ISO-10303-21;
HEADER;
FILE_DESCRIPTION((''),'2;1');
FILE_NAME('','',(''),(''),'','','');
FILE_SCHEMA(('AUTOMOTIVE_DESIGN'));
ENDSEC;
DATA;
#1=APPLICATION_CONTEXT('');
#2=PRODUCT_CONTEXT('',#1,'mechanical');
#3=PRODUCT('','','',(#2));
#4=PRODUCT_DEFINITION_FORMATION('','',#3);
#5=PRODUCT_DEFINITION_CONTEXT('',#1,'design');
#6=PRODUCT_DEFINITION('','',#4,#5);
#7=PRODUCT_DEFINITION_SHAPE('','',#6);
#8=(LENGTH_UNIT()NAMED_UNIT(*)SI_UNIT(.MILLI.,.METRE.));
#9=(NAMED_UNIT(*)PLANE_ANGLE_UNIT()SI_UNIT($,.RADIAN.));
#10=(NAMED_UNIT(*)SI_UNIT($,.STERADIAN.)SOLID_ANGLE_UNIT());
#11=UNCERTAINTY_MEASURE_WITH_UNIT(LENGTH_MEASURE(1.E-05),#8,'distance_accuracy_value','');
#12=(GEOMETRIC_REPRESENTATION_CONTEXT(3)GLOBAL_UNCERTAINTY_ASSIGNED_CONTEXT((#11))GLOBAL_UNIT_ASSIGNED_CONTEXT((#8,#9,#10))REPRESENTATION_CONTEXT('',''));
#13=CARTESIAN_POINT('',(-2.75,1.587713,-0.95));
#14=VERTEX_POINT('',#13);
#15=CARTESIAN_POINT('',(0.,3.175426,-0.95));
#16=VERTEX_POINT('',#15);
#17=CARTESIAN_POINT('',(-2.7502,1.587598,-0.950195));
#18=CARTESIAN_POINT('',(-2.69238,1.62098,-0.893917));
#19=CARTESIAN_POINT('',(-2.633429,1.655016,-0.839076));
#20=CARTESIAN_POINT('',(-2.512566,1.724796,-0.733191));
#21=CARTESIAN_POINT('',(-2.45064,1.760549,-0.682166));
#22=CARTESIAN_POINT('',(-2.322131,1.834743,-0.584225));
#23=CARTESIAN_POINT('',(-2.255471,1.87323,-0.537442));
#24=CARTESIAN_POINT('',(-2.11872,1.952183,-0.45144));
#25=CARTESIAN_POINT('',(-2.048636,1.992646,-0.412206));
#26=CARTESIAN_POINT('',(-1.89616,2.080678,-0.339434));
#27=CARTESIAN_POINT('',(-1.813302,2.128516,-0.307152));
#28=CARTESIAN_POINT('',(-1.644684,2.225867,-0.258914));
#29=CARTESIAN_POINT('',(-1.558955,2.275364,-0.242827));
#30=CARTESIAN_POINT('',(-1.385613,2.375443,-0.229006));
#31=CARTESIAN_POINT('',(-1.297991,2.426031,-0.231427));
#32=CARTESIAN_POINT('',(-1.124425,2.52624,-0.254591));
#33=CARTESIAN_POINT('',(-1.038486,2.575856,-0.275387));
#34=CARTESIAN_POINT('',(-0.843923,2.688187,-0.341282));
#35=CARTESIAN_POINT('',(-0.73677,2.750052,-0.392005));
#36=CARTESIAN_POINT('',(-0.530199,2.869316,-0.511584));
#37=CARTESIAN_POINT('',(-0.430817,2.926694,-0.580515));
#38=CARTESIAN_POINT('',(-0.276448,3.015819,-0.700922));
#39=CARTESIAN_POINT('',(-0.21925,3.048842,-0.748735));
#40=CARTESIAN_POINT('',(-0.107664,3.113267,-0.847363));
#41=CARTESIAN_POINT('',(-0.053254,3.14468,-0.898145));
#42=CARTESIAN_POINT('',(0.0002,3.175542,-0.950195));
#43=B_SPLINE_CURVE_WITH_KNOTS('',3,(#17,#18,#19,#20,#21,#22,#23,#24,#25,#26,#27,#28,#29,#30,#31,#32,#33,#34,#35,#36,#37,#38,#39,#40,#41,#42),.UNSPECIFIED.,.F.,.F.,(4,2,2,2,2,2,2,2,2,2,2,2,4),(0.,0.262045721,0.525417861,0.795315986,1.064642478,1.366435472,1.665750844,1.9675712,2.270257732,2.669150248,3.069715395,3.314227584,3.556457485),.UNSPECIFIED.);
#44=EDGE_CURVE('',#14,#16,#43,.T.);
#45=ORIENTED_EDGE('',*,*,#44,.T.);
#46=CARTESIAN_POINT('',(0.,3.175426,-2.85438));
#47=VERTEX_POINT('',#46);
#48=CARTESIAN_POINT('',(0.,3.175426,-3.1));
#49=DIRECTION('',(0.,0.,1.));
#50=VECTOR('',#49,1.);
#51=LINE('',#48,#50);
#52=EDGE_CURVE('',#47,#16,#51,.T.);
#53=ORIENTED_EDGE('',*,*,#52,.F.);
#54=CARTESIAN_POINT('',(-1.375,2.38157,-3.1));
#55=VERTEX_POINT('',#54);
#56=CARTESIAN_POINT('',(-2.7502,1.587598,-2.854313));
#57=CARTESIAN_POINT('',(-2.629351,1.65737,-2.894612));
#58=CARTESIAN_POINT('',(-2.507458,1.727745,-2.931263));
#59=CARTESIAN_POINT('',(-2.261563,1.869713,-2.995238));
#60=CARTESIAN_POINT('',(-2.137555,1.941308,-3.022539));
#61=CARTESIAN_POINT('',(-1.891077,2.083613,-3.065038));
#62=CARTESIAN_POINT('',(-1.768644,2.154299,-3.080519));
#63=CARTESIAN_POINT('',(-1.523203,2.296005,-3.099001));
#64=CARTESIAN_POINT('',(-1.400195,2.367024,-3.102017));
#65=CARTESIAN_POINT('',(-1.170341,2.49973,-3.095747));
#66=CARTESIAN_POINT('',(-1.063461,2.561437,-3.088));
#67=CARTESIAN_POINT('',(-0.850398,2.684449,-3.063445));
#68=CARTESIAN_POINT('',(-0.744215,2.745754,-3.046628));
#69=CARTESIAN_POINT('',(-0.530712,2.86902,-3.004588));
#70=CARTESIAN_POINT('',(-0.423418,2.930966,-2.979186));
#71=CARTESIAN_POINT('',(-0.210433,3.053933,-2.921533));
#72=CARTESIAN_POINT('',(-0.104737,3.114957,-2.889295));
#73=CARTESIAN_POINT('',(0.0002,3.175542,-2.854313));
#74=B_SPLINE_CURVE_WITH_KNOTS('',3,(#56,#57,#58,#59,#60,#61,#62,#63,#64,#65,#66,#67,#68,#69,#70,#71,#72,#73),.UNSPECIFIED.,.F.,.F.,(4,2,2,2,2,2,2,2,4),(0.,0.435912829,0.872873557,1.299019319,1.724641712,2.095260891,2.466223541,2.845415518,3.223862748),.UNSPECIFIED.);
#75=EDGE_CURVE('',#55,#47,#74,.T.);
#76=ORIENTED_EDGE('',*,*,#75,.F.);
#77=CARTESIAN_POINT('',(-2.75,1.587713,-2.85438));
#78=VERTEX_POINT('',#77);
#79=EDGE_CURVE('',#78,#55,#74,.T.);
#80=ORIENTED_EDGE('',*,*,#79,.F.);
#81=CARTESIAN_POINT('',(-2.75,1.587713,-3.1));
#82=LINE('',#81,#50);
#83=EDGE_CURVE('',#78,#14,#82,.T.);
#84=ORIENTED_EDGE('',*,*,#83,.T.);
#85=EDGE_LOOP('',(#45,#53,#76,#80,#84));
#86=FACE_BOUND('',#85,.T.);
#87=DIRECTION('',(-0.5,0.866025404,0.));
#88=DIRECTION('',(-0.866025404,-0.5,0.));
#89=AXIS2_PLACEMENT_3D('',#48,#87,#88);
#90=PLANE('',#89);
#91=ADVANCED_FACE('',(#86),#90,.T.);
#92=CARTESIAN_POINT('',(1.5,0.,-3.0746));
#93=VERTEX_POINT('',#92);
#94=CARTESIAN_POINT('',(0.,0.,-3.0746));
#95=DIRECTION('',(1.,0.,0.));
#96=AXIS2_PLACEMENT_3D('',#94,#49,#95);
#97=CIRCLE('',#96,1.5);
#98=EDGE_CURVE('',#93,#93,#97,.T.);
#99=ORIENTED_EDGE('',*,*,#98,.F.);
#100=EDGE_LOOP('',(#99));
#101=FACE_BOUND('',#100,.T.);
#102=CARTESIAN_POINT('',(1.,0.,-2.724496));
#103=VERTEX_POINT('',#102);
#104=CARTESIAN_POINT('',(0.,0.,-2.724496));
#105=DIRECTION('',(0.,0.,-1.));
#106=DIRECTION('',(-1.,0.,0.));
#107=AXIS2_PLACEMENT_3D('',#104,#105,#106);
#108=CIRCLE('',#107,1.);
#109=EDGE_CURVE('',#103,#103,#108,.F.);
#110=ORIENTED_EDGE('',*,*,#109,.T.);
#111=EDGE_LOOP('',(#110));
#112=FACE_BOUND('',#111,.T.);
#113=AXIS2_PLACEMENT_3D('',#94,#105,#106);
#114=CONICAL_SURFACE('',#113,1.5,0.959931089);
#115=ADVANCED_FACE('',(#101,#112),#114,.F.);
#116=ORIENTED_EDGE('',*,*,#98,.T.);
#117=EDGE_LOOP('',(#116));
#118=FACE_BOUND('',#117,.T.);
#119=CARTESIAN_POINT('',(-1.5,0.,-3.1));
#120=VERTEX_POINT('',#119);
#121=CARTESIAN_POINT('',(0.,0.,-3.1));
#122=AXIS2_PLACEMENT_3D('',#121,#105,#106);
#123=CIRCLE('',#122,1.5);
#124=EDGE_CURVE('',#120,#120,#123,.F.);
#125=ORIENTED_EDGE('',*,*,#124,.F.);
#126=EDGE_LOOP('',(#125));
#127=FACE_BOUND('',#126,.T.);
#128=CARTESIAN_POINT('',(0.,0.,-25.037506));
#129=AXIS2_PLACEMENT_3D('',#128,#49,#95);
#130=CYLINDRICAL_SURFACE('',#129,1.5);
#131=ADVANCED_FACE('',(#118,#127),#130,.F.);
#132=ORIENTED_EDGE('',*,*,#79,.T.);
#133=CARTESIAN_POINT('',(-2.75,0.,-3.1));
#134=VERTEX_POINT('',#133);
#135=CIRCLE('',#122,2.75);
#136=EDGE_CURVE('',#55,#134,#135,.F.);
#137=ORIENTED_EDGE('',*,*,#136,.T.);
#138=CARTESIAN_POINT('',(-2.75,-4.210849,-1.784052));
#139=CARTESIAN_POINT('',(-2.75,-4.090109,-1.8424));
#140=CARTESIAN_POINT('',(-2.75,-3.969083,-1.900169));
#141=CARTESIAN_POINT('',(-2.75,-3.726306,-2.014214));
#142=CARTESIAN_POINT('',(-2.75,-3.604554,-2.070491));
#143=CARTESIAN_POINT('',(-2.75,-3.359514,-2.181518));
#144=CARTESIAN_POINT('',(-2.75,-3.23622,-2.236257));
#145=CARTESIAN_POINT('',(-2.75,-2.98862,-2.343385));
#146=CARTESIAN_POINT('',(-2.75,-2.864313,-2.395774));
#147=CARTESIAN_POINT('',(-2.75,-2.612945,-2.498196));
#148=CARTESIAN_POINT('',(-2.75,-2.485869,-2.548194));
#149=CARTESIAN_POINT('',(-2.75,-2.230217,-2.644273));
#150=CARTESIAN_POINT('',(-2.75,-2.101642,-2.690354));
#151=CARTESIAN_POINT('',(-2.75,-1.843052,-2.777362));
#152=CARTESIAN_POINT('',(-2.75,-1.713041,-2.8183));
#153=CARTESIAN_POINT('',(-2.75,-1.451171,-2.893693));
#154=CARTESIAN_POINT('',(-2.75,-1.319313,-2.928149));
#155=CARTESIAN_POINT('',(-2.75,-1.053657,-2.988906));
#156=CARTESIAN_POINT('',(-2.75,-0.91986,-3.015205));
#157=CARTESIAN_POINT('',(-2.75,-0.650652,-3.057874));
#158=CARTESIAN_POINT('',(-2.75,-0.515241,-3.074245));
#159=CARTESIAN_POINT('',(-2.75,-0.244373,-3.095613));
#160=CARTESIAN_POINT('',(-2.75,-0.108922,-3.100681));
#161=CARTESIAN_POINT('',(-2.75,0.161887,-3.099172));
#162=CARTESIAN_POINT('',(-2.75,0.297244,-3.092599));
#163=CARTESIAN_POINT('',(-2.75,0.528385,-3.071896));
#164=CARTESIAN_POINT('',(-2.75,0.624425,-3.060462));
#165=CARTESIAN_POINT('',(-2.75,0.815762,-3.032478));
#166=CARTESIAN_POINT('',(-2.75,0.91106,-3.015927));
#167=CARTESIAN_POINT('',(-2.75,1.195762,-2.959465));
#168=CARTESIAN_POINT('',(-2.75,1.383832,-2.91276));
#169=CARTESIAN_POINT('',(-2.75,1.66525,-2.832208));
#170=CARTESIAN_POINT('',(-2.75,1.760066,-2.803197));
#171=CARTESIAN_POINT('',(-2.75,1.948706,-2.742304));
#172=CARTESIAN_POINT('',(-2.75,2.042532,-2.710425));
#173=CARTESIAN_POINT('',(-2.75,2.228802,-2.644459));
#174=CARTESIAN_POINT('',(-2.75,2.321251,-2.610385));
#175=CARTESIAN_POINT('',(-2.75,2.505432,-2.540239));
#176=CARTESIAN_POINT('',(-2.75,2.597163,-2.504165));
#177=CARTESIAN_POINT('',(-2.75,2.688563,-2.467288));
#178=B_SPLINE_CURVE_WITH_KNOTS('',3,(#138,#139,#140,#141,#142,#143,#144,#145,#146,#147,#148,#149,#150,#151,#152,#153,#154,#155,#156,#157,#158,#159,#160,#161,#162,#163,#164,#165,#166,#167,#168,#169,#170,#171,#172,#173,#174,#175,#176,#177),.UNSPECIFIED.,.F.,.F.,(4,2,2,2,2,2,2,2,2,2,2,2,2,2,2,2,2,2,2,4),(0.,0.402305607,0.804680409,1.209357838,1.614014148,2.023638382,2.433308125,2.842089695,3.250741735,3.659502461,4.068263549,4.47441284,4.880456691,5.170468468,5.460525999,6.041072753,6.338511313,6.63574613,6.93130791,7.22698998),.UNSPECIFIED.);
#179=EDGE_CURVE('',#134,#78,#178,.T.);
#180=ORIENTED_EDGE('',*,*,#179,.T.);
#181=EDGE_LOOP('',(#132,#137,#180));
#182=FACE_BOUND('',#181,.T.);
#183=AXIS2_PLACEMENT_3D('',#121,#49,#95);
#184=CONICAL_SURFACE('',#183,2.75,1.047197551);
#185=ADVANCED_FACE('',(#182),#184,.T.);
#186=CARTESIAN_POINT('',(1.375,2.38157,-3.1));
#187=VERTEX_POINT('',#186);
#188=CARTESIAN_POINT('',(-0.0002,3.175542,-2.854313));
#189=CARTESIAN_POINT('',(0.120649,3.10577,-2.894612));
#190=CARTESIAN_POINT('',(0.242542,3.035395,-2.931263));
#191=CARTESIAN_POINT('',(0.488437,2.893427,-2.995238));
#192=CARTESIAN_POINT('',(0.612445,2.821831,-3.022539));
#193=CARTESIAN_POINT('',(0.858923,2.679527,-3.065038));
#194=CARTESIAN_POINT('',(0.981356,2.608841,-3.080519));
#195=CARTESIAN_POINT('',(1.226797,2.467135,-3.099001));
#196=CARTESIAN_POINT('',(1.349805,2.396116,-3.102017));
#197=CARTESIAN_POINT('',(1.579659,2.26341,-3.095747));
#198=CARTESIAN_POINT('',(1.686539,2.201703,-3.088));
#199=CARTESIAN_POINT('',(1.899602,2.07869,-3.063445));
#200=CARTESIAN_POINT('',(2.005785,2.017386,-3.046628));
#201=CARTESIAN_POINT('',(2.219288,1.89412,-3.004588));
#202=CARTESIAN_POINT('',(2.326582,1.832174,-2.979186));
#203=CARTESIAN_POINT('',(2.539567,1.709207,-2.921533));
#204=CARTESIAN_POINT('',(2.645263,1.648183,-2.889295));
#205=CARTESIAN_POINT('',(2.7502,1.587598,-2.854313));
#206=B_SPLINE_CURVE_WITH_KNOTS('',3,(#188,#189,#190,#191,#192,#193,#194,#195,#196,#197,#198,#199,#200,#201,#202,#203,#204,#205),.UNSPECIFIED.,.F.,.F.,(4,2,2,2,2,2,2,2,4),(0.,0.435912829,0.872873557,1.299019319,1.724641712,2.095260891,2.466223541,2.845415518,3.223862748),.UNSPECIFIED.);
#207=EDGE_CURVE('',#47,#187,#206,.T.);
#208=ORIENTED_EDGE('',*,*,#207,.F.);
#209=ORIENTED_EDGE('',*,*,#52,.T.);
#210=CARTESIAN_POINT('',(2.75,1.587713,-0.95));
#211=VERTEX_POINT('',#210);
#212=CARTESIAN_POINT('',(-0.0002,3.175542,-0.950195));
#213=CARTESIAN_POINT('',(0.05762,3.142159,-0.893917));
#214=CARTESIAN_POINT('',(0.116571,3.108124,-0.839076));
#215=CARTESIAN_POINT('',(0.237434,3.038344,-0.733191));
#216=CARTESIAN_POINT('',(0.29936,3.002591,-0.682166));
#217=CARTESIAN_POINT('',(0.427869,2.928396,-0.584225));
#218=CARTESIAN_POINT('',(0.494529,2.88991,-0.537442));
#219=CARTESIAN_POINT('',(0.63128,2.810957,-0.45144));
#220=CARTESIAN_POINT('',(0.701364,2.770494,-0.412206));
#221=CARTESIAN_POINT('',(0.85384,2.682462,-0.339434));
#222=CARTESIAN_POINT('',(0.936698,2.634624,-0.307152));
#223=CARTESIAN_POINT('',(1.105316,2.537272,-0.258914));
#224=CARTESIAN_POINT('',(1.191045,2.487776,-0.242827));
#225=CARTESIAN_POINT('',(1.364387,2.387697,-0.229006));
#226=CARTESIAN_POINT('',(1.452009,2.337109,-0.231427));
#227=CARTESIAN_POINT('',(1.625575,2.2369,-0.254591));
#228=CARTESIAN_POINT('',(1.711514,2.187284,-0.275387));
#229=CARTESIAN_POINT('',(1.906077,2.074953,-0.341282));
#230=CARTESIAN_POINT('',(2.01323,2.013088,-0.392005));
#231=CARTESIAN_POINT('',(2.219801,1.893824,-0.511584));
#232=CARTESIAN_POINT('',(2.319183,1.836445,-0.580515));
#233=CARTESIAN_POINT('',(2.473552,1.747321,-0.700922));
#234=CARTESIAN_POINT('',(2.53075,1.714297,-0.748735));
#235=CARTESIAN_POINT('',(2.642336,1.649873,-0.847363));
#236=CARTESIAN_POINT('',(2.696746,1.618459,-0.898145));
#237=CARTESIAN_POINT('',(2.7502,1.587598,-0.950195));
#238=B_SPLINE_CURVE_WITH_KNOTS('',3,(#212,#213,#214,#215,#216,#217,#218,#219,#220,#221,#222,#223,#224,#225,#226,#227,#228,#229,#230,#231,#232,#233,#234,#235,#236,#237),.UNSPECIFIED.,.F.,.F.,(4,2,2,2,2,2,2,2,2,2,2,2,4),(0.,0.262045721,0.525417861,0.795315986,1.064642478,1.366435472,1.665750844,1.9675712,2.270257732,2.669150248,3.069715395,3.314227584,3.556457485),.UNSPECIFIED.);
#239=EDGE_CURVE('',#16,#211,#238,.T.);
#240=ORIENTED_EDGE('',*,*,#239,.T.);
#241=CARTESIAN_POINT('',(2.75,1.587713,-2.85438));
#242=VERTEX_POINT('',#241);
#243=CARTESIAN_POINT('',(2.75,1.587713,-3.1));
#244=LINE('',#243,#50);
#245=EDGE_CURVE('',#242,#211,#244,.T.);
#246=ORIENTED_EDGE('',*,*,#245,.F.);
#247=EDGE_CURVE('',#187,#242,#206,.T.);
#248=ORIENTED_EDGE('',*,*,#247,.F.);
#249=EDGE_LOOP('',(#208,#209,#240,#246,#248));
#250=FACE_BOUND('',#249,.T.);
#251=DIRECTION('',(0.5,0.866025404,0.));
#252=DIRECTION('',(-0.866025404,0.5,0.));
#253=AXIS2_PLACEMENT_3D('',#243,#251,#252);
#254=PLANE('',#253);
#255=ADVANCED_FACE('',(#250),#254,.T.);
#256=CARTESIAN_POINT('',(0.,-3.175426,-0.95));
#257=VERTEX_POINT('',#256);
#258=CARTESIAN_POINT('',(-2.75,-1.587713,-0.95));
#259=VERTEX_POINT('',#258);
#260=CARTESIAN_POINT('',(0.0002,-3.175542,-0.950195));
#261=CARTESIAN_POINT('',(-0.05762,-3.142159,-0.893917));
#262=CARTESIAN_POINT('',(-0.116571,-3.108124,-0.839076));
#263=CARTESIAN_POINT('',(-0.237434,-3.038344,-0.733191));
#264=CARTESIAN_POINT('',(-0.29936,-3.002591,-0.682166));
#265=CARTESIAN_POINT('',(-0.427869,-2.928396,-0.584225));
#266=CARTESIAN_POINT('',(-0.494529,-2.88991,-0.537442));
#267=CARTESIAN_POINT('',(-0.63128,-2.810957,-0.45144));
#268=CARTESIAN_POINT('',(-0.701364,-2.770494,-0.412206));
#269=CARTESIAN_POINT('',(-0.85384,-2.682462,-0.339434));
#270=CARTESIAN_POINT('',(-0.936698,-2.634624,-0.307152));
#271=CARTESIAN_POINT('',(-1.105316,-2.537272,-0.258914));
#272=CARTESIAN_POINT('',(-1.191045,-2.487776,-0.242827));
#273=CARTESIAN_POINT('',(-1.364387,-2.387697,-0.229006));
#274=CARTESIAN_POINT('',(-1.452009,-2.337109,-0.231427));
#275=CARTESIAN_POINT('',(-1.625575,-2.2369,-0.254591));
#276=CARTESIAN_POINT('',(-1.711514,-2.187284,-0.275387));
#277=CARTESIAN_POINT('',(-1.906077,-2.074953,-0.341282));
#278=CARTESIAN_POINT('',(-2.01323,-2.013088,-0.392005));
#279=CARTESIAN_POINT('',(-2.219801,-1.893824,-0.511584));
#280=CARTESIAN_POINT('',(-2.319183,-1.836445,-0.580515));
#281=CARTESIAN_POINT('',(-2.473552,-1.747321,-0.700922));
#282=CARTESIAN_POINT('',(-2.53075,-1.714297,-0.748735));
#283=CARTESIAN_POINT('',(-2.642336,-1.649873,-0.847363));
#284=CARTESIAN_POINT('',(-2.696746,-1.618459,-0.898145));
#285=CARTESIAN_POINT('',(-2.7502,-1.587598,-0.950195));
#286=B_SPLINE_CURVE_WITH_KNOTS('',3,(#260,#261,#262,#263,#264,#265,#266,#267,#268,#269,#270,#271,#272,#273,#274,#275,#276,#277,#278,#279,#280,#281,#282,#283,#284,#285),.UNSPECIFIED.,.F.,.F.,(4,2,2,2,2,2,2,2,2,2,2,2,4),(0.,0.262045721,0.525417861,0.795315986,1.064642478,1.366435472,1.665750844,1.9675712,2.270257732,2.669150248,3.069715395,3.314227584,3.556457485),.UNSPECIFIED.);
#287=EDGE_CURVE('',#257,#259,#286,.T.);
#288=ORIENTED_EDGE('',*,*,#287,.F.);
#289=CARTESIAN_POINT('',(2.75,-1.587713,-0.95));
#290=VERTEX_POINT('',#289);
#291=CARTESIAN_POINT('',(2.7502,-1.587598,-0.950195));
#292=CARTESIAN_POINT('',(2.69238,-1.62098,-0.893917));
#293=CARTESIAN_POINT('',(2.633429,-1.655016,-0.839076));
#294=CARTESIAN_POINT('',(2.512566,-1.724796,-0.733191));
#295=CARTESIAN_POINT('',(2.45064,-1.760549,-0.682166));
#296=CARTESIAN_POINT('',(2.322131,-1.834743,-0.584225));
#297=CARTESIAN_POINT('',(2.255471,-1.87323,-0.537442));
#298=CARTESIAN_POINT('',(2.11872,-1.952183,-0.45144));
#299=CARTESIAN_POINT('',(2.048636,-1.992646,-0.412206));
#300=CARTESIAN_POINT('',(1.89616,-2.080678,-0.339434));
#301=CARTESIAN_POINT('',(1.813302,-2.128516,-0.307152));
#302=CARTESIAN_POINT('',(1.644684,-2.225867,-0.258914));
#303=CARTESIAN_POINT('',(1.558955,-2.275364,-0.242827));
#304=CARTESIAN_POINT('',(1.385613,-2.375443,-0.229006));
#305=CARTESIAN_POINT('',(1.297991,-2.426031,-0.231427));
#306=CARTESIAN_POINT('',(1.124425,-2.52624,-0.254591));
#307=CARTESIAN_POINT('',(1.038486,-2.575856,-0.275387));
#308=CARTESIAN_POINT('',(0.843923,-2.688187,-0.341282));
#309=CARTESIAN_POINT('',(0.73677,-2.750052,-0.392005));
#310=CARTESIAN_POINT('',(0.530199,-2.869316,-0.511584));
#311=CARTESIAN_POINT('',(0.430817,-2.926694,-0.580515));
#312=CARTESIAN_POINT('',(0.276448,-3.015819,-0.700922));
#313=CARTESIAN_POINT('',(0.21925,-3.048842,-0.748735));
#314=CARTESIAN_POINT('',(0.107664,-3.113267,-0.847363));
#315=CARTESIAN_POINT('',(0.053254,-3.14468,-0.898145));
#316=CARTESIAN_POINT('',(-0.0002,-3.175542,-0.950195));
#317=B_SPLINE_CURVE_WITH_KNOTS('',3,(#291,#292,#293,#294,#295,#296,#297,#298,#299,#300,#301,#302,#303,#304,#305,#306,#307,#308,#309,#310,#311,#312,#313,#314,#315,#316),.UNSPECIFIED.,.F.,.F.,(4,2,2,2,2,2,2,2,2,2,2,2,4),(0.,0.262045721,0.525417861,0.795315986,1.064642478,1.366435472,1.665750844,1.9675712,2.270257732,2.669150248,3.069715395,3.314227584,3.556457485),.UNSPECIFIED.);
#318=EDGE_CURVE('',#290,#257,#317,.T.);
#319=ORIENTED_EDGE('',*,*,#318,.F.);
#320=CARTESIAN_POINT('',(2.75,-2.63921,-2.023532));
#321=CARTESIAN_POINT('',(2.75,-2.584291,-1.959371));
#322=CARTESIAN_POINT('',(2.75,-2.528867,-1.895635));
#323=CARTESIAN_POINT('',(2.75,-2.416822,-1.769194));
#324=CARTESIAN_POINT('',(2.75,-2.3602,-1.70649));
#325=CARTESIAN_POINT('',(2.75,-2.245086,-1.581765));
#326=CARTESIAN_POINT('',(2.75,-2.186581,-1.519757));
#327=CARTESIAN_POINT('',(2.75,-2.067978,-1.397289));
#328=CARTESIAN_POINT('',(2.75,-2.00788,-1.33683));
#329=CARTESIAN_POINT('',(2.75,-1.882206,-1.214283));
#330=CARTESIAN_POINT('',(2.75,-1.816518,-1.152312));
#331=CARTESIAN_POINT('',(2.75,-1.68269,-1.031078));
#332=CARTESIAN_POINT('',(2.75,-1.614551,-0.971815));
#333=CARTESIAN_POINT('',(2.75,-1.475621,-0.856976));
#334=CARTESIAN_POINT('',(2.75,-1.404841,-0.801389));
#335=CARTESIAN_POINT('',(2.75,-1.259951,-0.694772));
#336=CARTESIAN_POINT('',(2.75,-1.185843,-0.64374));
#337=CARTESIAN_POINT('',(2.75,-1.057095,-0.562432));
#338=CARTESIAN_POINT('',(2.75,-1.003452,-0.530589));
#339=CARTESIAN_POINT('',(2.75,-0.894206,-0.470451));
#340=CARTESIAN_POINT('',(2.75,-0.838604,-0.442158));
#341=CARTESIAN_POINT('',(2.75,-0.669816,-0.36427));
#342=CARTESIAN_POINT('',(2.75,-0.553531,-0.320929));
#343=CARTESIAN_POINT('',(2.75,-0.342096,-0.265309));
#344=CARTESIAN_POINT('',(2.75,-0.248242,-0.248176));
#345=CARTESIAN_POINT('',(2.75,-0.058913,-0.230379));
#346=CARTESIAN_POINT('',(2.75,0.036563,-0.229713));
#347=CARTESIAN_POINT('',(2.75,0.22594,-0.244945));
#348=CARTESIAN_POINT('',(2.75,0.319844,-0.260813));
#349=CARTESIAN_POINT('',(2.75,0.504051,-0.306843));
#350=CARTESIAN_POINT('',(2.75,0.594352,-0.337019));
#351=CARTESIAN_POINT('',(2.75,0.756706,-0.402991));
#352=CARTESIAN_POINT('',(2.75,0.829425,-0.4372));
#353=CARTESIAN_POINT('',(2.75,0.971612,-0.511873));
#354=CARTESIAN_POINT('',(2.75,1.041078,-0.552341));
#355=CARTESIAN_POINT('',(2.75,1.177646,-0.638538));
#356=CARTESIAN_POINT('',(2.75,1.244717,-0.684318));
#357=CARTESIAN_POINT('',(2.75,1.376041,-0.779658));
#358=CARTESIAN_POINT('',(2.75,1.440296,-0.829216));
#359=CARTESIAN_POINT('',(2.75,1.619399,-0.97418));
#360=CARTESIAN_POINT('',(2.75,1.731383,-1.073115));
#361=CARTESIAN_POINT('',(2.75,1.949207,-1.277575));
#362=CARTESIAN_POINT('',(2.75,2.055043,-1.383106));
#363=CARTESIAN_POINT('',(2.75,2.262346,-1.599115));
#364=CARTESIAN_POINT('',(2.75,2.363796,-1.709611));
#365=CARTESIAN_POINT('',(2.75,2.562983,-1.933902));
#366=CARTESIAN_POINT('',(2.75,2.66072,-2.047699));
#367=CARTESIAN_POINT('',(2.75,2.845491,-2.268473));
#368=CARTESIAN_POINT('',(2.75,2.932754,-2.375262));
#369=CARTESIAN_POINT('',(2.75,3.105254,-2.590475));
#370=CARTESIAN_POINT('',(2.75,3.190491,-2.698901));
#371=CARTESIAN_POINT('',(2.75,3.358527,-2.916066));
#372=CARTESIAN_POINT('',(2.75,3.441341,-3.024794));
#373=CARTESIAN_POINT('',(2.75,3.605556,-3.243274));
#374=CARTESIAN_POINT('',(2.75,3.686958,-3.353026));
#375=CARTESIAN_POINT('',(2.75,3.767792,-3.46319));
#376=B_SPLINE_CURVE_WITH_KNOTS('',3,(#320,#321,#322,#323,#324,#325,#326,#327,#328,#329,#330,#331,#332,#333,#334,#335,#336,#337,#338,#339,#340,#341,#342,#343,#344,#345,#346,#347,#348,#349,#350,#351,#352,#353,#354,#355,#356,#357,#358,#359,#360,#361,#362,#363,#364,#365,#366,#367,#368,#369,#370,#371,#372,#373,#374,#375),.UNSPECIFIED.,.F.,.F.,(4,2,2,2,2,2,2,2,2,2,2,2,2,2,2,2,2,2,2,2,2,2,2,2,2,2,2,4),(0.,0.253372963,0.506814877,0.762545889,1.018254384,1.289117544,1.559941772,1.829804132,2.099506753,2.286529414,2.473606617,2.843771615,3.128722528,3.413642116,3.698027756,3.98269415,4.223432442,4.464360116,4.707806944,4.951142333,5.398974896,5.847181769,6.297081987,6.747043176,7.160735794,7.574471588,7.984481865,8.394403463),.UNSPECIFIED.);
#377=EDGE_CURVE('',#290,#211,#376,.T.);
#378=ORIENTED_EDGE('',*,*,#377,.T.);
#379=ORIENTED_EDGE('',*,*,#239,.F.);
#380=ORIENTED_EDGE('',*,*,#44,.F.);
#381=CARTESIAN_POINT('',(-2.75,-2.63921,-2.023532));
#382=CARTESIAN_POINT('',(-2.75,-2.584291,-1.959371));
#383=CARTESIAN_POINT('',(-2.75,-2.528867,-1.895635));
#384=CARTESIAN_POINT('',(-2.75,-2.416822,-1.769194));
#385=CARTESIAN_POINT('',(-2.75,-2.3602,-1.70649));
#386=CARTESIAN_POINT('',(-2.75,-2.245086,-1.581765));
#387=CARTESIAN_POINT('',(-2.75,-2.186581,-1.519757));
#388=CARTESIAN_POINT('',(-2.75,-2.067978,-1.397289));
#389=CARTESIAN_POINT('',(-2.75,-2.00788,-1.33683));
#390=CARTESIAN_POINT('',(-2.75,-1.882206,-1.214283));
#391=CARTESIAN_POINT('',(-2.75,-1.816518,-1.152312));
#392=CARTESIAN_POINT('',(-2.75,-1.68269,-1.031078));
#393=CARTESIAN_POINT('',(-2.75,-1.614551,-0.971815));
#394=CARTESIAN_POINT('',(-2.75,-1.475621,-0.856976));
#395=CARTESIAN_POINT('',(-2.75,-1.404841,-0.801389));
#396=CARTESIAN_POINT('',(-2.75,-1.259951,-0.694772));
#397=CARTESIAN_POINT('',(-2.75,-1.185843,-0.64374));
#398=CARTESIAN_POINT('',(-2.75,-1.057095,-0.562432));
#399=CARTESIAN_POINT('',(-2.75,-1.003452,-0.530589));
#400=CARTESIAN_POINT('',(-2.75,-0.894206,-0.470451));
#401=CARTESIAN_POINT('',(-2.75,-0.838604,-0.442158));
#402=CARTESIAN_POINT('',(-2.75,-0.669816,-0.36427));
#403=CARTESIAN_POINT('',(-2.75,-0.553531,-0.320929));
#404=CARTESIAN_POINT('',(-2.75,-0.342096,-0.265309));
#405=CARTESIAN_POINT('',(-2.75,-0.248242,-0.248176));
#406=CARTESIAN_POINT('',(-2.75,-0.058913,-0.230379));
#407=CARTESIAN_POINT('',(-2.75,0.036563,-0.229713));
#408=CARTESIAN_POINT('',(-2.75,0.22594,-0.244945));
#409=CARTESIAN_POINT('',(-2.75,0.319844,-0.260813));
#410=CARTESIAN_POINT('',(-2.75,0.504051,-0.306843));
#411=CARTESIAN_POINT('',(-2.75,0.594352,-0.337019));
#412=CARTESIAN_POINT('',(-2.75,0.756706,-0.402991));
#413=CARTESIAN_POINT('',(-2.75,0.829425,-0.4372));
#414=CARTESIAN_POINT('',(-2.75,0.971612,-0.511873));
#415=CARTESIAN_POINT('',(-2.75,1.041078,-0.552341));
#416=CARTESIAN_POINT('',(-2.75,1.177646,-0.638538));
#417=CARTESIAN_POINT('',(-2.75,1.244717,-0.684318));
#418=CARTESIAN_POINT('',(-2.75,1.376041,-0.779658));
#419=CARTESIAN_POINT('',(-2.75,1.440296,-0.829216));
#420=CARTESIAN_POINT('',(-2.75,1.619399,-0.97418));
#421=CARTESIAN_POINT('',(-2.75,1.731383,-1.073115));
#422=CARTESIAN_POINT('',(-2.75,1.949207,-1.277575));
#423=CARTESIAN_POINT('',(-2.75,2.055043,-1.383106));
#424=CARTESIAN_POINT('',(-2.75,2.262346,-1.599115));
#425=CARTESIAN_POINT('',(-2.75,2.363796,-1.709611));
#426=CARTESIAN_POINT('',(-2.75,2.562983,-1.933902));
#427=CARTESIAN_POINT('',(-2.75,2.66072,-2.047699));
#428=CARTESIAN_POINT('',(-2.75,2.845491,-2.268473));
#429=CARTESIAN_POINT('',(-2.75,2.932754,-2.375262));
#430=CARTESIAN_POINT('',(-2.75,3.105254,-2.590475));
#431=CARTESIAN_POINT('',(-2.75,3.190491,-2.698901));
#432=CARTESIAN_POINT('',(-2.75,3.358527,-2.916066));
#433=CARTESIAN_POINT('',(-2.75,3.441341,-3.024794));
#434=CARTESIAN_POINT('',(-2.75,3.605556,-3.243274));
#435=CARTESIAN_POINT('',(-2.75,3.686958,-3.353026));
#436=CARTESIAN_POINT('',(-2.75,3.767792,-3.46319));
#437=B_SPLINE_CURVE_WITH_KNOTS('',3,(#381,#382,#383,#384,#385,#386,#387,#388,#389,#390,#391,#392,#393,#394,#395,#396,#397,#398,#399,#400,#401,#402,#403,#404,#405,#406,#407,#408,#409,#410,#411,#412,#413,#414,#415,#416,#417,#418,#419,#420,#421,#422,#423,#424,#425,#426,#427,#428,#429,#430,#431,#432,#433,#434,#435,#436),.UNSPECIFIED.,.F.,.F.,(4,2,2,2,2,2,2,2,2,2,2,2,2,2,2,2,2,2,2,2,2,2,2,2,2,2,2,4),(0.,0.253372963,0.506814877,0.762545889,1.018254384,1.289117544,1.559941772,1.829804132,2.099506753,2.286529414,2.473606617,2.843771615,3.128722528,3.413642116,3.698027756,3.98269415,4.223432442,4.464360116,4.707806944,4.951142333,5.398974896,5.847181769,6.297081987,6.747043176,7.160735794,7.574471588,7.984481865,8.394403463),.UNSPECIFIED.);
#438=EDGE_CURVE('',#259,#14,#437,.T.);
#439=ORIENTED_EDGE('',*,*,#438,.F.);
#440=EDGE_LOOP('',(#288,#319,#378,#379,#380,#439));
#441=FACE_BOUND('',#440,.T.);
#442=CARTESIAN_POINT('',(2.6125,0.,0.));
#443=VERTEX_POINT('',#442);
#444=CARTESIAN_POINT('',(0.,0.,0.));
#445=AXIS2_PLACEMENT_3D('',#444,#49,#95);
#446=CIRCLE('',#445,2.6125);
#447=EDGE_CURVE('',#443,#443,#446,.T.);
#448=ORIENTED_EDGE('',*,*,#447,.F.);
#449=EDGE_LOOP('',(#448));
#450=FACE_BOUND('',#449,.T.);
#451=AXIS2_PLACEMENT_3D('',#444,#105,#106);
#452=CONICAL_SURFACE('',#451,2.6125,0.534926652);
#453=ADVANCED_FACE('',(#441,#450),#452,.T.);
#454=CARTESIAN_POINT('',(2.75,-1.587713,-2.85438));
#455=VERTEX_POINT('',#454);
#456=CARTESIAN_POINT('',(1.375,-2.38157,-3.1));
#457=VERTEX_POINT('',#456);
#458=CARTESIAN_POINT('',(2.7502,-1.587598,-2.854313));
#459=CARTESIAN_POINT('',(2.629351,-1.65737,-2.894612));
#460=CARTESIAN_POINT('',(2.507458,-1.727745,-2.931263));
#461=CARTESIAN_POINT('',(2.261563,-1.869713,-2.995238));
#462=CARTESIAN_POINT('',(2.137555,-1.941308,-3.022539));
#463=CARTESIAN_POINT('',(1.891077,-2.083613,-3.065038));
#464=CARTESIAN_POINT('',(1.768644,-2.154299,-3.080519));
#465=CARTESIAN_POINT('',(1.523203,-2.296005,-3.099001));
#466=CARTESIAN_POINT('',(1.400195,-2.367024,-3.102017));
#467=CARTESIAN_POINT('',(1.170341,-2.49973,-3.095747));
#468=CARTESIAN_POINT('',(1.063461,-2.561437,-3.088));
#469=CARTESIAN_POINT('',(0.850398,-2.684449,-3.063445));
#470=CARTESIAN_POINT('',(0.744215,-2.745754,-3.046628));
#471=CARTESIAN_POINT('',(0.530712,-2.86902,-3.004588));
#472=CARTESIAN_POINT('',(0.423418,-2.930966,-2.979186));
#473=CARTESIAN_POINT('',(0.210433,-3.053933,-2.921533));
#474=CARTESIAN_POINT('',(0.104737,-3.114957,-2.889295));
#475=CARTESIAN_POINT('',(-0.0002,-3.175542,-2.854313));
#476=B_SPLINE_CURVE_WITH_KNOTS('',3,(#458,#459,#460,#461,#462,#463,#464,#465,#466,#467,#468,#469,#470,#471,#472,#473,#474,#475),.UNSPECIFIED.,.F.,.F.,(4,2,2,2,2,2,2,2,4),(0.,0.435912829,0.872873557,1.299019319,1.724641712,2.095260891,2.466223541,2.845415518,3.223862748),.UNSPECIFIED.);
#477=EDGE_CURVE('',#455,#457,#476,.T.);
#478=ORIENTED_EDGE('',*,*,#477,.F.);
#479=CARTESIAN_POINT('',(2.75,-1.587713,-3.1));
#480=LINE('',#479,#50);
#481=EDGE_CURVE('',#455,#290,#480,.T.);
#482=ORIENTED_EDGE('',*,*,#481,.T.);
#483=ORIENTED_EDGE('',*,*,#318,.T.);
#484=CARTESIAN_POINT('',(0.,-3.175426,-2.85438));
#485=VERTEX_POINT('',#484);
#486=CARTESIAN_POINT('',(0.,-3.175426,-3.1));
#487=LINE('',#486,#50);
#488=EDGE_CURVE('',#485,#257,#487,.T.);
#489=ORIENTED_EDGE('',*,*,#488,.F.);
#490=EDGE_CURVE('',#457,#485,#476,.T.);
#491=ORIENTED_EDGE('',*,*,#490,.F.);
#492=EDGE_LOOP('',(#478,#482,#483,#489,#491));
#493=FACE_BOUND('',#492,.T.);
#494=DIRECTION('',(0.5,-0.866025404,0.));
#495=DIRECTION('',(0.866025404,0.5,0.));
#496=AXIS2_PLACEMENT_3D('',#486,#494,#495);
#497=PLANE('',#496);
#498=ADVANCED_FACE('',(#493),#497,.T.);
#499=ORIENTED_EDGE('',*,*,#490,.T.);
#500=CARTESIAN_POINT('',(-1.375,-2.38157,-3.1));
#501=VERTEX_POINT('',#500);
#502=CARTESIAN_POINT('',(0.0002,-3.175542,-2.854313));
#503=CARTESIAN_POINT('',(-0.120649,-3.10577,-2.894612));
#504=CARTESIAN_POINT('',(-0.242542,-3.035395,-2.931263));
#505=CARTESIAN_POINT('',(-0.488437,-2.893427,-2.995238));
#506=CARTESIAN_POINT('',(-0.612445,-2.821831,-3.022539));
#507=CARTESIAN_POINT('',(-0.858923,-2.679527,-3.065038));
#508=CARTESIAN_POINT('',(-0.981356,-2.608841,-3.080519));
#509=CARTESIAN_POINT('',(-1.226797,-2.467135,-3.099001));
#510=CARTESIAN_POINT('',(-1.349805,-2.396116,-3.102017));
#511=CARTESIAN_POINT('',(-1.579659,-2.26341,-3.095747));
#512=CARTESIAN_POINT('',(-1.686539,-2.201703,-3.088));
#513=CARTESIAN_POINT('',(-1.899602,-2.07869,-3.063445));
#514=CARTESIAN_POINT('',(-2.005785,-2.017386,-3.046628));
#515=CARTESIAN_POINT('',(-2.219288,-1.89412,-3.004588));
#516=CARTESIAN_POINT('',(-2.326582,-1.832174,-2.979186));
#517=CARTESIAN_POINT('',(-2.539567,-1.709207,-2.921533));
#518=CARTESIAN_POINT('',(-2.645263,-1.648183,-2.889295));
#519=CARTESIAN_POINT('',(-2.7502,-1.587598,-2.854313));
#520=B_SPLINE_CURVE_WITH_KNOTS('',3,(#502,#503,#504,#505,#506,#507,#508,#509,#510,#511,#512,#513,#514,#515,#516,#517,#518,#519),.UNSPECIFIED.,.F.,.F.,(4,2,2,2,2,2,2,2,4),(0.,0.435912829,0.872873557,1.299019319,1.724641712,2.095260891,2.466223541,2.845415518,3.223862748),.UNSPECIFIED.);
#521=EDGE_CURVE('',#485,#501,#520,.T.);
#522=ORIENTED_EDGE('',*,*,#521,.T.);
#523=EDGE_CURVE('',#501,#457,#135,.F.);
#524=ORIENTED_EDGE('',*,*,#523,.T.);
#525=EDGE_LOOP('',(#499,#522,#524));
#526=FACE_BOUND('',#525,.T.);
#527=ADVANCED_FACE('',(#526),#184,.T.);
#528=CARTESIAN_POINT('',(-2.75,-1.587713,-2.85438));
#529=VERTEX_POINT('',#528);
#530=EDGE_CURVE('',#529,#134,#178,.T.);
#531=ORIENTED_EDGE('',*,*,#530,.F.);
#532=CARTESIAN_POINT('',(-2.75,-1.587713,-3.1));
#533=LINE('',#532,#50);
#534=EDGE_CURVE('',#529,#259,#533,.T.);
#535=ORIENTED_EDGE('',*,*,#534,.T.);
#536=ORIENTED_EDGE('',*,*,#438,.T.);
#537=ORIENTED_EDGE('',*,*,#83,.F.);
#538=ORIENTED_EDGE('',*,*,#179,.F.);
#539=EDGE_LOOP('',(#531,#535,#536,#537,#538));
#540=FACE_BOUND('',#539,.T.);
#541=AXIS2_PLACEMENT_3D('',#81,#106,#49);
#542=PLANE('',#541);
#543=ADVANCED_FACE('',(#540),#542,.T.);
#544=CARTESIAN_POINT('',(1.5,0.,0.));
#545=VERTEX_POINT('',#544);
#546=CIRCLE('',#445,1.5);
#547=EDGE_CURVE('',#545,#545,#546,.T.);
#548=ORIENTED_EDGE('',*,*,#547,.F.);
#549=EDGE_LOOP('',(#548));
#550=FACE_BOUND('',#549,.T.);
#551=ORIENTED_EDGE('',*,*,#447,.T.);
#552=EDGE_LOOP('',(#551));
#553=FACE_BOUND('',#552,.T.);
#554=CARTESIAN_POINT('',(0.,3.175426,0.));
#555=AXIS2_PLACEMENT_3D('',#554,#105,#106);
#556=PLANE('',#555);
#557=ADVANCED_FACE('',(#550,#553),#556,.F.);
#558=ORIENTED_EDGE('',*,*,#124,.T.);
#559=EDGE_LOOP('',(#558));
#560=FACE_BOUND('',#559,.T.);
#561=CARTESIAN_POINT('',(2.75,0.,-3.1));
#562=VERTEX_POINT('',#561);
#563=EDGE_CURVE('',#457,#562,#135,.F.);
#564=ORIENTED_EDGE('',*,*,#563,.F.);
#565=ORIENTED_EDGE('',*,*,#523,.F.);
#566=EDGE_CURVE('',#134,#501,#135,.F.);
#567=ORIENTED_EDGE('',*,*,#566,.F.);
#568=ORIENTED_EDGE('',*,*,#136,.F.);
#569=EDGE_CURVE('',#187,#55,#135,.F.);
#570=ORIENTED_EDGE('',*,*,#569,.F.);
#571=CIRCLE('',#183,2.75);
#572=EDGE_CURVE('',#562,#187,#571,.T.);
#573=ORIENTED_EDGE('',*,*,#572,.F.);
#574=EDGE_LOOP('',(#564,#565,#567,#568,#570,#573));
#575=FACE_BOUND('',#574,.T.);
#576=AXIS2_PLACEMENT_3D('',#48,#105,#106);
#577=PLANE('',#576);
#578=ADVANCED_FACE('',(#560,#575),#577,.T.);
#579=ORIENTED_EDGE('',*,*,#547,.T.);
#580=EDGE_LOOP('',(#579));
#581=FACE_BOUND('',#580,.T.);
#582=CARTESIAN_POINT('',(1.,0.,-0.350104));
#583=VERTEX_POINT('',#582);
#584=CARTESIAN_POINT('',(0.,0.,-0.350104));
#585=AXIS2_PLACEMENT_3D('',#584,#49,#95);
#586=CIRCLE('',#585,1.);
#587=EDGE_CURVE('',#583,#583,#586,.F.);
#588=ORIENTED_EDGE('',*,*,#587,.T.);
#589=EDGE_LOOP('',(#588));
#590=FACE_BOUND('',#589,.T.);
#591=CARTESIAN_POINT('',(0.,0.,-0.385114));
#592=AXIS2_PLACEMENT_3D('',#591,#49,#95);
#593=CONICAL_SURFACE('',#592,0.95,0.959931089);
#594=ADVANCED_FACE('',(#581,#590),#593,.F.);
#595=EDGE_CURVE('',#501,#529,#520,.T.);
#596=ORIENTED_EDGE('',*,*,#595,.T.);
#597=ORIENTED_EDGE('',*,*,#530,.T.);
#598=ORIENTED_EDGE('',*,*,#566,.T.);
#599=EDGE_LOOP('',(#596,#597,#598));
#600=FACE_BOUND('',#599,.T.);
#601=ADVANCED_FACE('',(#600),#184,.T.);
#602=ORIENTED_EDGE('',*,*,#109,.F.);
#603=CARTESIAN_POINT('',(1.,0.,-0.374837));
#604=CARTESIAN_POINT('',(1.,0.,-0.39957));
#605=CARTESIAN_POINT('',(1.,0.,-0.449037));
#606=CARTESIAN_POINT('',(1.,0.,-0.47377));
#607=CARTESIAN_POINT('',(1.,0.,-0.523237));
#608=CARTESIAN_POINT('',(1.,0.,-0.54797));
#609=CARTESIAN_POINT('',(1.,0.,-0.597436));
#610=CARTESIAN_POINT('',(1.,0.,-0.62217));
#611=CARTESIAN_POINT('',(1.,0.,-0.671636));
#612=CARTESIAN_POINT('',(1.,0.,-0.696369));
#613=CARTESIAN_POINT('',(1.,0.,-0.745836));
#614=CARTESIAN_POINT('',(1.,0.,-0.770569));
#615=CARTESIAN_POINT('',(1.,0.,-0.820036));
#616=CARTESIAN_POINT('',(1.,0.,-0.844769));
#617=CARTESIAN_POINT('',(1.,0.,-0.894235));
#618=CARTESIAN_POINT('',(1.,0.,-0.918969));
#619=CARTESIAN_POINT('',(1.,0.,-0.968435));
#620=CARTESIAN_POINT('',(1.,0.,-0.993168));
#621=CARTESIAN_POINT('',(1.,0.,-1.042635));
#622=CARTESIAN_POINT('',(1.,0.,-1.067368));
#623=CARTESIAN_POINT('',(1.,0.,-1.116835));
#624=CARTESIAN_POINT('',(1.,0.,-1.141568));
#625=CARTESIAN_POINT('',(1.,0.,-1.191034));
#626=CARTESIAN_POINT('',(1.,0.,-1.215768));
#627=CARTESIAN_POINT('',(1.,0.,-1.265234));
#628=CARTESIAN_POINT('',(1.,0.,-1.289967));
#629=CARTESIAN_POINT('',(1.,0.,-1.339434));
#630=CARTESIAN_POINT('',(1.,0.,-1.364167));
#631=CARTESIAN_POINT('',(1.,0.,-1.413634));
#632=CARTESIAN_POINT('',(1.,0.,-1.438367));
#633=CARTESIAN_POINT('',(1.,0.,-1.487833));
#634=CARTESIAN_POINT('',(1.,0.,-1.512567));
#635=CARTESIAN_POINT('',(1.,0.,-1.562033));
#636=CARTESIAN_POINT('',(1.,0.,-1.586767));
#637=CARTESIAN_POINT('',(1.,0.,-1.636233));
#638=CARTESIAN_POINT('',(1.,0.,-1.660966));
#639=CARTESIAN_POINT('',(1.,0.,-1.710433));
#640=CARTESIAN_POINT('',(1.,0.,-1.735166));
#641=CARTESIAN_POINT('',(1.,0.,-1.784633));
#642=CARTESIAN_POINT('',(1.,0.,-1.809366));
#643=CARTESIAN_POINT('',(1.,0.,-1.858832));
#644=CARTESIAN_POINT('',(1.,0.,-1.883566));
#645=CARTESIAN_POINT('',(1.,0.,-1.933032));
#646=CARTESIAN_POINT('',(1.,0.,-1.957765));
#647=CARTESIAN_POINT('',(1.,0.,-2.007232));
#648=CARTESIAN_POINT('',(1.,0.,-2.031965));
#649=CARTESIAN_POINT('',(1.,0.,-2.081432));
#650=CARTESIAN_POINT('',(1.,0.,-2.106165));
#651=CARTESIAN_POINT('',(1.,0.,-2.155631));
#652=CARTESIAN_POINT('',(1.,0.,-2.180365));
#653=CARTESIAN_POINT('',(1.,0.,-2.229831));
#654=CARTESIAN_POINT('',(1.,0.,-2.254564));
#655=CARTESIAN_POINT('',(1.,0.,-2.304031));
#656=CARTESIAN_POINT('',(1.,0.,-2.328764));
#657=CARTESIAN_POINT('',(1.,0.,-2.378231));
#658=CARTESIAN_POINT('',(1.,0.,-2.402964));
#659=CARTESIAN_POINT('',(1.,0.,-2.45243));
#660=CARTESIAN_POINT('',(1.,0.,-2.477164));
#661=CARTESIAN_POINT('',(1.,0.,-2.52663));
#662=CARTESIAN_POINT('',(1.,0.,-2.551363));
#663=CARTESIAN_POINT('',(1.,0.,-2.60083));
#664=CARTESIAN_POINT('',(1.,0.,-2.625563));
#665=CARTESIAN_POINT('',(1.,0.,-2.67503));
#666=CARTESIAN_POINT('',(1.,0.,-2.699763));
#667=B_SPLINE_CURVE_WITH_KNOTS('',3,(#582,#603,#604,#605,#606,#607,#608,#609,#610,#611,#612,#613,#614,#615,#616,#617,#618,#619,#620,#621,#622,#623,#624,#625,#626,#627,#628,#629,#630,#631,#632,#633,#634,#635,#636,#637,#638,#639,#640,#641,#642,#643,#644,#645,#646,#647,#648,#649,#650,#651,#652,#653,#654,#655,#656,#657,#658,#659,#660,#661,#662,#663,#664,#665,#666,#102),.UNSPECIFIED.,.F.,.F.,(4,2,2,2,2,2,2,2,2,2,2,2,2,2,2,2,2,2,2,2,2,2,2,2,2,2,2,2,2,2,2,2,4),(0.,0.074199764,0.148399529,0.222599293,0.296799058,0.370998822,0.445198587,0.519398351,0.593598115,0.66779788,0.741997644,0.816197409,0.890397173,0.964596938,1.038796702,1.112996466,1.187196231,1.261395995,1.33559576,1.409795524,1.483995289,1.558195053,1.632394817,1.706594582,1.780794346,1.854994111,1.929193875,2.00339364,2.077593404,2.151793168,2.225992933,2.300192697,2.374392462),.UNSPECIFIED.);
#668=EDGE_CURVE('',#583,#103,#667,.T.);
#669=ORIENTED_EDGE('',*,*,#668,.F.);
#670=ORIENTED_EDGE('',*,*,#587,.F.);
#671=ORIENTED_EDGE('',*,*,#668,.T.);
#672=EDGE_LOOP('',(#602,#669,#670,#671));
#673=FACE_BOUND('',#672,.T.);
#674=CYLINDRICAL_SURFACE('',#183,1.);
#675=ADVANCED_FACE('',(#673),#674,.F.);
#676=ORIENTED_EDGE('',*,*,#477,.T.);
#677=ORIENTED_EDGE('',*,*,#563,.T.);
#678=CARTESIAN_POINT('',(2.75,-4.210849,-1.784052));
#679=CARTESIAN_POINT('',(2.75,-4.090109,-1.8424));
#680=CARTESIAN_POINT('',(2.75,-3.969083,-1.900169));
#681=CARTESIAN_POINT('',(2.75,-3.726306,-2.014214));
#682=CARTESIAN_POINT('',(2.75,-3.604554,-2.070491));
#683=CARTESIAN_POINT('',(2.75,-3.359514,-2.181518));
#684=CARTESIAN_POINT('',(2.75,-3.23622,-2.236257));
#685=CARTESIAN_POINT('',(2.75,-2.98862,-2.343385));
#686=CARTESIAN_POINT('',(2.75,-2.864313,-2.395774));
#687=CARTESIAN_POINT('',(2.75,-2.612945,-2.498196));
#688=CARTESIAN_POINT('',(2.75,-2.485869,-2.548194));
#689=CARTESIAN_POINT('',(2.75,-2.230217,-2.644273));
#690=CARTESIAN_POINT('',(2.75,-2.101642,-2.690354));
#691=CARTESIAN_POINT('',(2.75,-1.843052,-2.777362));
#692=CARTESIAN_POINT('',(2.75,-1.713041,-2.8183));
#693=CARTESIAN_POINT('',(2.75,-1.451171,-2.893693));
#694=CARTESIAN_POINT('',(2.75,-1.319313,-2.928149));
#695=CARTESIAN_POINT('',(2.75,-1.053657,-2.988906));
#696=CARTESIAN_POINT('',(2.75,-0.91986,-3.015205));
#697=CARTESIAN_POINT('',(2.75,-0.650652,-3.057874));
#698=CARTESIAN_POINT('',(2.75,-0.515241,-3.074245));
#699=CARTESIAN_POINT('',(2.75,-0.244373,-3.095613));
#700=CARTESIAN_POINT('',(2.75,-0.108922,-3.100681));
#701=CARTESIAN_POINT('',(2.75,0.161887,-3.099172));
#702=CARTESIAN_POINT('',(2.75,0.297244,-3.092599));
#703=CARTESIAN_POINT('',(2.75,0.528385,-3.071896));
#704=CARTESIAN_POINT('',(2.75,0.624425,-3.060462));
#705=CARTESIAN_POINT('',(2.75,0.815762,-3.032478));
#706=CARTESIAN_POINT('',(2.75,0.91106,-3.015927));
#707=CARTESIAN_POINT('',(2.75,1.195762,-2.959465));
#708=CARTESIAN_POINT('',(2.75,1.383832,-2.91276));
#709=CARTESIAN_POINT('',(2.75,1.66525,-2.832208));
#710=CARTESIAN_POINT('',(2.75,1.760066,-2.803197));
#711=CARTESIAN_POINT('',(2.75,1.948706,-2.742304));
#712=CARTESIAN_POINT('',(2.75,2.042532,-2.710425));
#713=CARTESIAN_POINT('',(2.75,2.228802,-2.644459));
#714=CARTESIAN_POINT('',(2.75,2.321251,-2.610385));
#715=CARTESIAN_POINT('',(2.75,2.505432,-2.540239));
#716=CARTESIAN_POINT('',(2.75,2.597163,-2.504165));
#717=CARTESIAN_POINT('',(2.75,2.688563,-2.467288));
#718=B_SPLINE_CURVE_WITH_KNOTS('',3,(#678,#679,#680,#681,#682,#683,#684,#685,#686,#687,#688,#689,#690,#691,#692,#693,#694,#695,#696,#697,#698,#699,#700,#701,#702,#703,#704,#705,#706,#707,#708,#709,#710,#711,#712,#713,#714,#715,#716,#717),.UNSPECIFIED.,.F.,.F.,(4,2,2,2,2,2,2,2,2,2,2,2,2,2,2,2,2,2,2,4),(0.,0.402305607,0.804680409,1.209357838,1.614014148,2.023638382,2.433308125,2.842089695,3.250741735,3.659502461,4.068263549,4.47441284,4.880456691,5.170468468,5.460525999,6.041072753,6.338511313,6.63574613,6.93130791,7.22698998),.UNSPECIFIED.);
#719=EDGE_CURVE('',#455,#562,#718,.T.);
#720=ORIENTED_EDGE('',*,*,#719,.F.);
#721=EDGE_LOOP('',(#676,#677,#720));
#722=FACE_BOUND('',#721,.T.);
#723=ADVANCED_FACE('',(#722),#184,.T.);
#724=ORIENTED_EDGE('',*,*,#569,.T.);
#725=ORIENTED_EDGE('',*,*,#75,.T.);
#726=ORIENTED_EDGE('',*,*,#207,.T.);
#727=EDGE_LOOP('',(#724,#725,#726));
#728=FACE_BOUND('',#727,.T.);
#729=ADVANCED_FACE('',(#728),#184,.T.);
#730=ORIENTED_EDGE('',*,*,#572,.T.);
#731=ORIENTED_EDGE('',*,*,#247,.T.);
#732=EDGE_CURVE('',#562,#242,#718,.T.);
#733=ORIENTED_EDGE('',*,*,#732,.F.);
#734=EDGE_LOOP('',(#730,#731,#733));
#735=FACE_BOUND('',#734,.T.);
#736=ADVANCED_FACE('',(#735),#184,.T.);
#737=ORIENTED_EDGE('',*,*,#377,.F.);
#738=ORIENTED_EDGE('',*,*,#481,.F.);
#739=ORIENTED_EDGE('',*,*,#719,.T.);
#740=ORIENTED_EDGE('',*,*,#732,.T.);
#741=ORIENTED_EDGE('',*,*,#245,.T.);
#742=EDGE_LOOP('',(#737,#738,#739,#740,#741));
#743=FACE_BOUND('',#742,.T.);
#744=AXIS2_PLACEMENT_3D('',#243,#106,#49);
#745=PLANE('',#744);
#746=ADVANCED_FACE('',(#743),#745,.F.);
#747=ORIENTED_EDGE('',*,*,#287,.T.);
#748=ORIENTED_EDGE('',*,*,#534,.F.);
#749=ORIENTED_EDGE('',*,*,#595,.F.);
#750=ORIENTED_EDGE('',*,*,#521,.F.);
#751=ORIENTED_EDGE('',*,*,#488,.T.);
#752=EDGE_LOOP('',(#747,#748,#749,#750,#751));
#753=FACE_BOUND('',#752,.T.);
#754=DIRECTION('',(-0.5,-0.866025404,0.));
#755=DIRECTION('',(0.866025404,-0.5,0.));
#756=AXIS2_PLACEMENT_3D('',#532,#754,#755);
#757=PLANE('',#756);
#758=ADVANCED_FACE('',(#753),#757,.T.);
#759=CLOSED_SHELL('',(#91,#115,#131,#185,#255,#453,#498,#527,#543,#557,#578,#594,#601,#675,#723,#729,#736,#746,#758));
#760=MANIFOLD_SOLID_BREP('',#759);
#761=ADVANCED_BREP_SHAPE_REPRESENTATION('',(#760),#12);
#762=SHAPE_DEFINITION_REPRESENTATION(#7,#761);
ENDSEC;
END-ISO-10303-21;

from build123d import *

# Parameters (mm, degrees)
BASENUT_START = -3.1
BASENUTSKE_R  = 1
BASENUT_DEPTH = 3.1


# Read off the part's stored shape, not the designer's step: ThreadSchematic
with BuildPart() as part:
    # BaseNutSke → BaseNut (new body)
    with BuildSketch(Plane.XY.offset(BASENUT_START)):
        Polygon((2.75, 1.58771324), (2.75, -1.58771324), (0, -3.175426481), (-2.75, -1.58771324), (-2.75, 1.58771324), (0, 3.175426481), align=None)
        Circle(BASENUTSKE_R, mode=Mode.SUBTRACT)
    extrude(amount=BASENUT_DEPTH)

    # Sketch5 (on Front Plane) → EndChamfer (revolve, cut)
    with BuildSketch(Plane.XY):
        Polygon((3.0746, 1.5), (2.689485854, 0.95), (3.1254, 0.95), (3.1254, 1.5), align=None)
    revolve(axis=Axis((3.1254, 0.95, 0), (-1, 0, 0)), mode=Mode.SUBTRACT)

    # Sketch3 → Double-Chamfer (revolve, cut)
    with BuildSketch(Plane(origin=(0, 0, 0), x_dir=(0, 0, -1), z_dir=(1, 0, 0)), mode=Mode.PRIVATE) as double_chamfer_sk:
        Polygon((3.1, 2.75), (2.854379907, 3.175426481), (2.854379907, 13.175426481), (13.1, 13.175426481), (13.1, 2.75), align=None)
        Polygon((0.95, 13.175426481), (-10, 13.175426481), (-10, 2.6125), (0, 2.6125), (0.95, 3.175426481), align=None)
    revolve(double_chamfer_sk.sketch.rotate(Axis((0, 0, 0), (0, 0, -1)), 300.000001719), axis=Axis((0, 0, 0), (0, 0, -1)), mode=Mode.SUBTRACT)

    # ThreadSchematic outline → ThreadSchematic (revolve, cut)
    with BuildSketch(Plane.XZ):
        Polygon((1, 0), (1, -0.350103769), (1.5, 0), align=None)
        Polygon((1.5, -3.0746), (1, -2.724496231), (1, -3.1), (1.5, -3.1), align=None)
    revolve(axis=Axis((0, 0, 0), (0, 0, 1)), mode=Mode.SUBTRACT)


solid = part.part
